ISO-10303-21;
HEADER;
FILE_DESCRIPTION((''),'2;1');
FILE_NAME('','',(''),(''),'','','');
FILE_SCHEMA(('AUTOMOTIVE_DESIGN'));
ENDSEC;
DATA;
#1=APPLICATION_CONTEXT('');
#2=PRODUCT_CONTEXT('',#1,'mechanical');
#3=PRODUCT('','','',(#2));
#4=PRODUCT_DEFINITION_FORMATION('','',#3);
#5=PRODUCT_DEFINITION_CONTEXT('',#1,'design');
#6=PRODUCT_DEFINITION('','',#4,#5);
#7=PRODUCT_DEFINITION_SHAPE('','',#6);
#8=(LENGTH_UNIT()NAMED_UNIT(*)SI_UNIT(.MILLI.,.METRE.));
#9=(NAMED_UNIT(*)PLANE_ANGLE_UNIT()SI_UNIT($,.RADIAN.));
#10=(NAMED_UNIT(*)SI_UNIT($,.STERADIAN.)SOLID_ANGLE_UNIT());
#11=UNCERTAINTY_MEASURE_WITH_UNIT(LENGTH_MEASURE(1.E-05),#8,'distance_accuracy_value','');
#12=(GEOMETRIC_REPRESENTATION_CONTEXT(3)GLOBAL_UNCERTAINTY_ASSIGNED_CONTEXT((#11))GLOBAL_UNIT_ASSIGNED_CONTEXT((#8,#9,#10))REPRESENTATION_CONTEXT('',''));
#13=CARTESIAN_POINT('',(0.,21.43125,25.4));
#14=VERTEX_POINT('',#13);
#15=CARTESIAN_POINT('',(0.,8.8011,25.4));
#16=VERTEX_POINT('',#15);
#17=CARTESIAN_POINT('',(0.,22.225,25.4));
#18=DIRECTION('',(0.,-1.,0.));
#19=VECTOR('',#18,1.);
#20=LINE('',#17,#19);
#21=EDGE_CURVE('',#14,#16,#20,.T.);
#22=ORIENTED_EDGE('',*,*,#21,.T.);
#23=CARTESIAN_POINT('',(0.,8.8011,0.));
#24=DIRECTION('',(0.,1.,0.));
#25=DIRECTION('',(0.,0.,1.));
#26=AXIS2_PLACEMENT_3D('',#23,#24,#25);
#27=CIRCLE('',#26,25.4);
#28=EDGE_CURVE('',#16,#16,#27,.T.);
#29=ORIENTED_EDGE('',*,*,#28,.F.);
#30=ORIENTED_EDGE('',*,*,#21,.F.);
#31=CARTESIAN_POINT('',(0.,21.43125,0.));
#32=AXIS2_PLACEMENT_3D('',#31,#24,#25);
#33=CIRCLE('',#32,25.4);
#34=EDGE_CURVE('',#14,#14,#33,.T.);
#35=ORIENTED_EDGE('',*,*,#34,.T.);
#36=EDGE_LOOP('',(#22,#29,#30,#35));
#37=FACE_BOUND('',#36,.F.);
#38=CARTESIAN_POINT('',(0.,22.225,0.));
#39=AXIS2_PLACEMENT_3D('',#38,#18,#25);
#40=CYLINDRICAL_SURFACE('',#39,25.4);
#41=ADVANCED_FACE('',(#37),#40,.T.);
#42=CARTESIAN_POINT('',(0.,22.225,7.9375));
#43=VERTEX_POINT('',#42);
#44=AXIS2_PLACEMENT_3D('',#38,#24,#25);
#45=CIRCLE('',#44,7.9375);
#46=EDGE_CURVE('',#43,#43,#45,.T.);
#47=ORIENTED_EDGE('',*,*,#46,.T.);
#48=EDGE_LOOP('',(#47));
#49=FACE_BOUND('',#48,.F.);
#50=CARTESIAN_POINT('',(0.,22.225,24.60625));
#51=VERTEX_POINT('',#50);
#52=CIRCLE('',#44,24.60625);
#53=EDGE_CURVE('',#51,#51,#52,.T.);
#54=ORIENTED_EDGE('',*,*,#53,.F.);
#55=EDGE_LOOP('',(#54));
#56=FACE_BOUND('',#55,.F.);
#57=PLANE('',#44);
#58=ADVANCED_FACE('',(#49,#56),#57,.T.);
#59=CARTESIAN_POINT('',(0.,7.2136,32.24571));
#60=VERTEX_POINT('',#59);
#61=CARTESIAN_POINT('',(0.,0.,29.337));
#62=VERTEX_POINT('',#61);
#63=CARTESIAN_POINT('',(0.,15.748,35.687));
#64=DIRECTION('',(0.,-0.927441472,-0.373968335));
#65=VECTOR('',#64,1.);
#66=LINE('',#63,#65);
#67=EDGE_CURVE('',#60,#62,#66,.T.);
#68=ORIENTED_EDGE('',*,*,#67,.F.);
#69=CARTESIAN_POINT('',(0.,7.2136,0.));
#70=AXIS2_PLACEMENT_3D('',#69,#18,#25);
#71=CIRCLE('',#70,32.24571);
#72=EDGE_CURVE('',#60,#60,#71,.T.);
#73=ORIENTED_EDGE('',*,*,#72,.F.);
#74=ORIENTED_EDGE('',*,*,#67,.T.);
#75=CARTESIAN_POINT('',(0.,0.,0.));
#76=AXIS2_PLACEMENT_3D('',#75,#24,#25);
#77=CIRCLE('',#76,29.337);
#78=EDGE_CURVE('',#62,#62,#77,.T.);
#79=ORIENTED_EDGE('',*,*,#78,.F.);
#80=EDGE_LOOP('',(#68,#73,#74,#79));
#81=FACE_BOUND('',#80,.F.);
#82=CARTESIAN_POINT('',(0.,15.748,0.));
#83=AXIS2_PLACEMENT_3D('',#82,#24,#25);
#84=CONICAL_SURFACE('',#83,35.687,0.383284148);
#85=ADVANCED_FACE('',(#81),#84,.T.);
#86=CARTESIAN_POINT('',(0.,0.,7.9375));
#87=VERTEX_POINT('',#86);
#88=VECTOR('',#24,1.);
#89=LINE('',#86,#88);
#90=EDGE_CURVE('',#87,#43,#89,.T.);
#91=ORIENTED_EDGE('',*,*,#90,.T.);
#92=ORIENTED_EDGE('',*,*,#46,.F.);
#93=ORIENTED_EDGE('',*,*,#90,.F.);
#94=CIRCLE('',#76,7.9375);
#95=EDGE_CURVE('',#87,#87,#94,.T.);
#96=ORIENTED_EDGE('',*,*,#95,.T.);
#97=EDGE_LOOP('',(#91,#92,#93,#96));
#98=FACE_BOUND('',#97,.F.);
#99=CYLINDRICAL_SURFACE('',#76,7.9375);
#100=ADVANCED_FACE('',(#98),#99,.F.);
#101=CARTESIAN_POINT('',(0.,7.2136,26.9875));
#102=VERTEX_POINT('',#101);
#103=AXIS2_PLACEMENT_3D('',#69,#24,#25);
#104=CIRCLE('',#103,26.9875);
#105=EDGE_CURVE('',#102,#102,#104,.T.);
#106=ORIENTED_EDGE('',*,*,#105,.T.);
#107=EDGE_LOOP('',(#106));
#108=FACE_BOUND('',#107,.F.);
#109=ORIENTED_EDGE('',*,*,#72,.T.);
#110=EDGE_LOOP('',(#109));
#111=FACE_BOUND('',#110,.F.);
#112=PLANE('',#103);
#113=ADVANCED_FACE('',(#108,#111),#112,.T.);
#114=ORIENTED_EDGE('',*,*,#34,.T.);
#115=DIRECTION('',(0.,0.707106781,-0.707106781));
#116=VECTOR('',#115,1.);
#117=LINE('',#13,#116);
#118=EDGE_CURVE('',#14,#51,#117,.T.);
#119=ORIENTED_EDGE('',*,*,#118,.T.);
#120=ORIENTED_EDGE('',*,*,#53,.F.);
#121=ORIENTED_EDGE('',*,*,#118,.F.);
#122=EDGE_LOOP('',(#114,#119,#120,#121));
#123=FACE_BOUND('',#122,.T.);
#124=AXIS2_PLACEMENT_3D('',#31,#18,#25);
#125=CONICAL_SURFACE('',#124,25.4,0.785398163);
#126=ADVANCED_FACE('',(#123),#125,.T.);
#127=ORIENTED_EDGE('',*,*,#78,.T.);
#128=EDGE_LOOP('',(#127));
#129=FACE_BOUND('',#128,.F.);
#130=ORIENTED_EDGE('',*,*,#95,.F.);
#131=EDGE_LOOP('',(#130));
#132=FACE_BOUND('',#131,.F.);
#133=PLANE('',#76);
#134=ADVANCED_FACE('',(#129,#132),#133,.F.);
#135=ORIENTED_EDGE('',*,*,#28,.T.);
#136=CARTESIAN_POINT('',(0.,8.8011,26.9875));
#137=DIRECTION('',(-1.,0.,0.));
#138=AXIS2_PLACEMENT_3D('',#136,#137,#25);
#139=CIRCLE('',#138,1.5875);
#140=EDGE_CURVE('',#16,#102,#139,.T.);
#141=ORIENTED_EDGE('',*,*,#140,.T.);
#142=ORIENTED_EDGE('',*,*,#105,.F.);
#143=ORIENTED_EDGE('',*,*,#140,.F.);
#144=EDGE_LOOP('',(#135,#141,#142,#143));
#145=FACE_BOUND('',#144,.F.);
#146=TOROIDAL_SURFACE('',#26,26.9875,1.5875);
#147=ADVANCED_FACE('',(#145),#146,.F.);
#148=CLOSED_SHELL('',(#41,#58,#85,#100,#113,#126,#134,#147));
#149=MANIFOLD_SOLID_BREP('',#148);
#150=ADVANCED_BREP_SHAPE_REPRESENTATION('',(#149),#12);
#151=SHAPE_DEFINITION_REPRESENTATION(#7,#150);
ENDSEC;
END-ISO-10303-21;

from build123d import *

# Parameters (mm, degrees)
F0_W    = 15.0114
F0_H    = 17.4625
F0_W_2  = 7.2136
F0_H_2  = 10.287
F2_R    = 1.5875
F3_SIZE = 0.79375


# Not quite as in the source:
# - a fillet or chamfer that OpenCascade refuses, or shapes differently, is made with other operations: its cross-section is extruded or revolved along the edge and cut away or added


with BuildPart() as f1:
    # F0 (on Right) → F1 (revolve)
    with BuildSketch(Plane.YZ):
        with Locations((14.7193, 16.66875)):
            Rectangle(F0_W, F0_H)
        with Locations((3.6068, 16.66875)):
            Rectangle(F0_W_2, F0_H)
        with Locations((3.6068, 30.5435)):
            Rectangle(F0_W_2, F0_H_2)
    revolve(axis=Axis((0, 11.1125, 0), (0, 1, 0)))

    # F2
    f2_edges = [f1.edges().sort_by_distance(p)[0] for p in [
        (0, 7.2136, -25.4),
    ]]
    fillet(f2_edges, radius=F2_R)

    # F3
    f3_edges = [f1.edges().sort_by_distance(p)[0] for p in [
        (0, 22.225, -25.4),
    ]]
    chamfer(f3_edges, length=F3_SIZE)

    # F4: chamfer of 6.35 x 15.748 on 2 edges, made by hand

    # F4_s1 → F4_t2 (revolve, cut)
    with BuildSketch(Plane.YZ):
        Polygon((15.748, 35.687), (0, 29.337), (0, 35.687), align=None)
    revolve(axis=Axis((0, 0, 0), (0, 1, 0)), mode=Mode.SUBTRACT)


solid = f1.part
